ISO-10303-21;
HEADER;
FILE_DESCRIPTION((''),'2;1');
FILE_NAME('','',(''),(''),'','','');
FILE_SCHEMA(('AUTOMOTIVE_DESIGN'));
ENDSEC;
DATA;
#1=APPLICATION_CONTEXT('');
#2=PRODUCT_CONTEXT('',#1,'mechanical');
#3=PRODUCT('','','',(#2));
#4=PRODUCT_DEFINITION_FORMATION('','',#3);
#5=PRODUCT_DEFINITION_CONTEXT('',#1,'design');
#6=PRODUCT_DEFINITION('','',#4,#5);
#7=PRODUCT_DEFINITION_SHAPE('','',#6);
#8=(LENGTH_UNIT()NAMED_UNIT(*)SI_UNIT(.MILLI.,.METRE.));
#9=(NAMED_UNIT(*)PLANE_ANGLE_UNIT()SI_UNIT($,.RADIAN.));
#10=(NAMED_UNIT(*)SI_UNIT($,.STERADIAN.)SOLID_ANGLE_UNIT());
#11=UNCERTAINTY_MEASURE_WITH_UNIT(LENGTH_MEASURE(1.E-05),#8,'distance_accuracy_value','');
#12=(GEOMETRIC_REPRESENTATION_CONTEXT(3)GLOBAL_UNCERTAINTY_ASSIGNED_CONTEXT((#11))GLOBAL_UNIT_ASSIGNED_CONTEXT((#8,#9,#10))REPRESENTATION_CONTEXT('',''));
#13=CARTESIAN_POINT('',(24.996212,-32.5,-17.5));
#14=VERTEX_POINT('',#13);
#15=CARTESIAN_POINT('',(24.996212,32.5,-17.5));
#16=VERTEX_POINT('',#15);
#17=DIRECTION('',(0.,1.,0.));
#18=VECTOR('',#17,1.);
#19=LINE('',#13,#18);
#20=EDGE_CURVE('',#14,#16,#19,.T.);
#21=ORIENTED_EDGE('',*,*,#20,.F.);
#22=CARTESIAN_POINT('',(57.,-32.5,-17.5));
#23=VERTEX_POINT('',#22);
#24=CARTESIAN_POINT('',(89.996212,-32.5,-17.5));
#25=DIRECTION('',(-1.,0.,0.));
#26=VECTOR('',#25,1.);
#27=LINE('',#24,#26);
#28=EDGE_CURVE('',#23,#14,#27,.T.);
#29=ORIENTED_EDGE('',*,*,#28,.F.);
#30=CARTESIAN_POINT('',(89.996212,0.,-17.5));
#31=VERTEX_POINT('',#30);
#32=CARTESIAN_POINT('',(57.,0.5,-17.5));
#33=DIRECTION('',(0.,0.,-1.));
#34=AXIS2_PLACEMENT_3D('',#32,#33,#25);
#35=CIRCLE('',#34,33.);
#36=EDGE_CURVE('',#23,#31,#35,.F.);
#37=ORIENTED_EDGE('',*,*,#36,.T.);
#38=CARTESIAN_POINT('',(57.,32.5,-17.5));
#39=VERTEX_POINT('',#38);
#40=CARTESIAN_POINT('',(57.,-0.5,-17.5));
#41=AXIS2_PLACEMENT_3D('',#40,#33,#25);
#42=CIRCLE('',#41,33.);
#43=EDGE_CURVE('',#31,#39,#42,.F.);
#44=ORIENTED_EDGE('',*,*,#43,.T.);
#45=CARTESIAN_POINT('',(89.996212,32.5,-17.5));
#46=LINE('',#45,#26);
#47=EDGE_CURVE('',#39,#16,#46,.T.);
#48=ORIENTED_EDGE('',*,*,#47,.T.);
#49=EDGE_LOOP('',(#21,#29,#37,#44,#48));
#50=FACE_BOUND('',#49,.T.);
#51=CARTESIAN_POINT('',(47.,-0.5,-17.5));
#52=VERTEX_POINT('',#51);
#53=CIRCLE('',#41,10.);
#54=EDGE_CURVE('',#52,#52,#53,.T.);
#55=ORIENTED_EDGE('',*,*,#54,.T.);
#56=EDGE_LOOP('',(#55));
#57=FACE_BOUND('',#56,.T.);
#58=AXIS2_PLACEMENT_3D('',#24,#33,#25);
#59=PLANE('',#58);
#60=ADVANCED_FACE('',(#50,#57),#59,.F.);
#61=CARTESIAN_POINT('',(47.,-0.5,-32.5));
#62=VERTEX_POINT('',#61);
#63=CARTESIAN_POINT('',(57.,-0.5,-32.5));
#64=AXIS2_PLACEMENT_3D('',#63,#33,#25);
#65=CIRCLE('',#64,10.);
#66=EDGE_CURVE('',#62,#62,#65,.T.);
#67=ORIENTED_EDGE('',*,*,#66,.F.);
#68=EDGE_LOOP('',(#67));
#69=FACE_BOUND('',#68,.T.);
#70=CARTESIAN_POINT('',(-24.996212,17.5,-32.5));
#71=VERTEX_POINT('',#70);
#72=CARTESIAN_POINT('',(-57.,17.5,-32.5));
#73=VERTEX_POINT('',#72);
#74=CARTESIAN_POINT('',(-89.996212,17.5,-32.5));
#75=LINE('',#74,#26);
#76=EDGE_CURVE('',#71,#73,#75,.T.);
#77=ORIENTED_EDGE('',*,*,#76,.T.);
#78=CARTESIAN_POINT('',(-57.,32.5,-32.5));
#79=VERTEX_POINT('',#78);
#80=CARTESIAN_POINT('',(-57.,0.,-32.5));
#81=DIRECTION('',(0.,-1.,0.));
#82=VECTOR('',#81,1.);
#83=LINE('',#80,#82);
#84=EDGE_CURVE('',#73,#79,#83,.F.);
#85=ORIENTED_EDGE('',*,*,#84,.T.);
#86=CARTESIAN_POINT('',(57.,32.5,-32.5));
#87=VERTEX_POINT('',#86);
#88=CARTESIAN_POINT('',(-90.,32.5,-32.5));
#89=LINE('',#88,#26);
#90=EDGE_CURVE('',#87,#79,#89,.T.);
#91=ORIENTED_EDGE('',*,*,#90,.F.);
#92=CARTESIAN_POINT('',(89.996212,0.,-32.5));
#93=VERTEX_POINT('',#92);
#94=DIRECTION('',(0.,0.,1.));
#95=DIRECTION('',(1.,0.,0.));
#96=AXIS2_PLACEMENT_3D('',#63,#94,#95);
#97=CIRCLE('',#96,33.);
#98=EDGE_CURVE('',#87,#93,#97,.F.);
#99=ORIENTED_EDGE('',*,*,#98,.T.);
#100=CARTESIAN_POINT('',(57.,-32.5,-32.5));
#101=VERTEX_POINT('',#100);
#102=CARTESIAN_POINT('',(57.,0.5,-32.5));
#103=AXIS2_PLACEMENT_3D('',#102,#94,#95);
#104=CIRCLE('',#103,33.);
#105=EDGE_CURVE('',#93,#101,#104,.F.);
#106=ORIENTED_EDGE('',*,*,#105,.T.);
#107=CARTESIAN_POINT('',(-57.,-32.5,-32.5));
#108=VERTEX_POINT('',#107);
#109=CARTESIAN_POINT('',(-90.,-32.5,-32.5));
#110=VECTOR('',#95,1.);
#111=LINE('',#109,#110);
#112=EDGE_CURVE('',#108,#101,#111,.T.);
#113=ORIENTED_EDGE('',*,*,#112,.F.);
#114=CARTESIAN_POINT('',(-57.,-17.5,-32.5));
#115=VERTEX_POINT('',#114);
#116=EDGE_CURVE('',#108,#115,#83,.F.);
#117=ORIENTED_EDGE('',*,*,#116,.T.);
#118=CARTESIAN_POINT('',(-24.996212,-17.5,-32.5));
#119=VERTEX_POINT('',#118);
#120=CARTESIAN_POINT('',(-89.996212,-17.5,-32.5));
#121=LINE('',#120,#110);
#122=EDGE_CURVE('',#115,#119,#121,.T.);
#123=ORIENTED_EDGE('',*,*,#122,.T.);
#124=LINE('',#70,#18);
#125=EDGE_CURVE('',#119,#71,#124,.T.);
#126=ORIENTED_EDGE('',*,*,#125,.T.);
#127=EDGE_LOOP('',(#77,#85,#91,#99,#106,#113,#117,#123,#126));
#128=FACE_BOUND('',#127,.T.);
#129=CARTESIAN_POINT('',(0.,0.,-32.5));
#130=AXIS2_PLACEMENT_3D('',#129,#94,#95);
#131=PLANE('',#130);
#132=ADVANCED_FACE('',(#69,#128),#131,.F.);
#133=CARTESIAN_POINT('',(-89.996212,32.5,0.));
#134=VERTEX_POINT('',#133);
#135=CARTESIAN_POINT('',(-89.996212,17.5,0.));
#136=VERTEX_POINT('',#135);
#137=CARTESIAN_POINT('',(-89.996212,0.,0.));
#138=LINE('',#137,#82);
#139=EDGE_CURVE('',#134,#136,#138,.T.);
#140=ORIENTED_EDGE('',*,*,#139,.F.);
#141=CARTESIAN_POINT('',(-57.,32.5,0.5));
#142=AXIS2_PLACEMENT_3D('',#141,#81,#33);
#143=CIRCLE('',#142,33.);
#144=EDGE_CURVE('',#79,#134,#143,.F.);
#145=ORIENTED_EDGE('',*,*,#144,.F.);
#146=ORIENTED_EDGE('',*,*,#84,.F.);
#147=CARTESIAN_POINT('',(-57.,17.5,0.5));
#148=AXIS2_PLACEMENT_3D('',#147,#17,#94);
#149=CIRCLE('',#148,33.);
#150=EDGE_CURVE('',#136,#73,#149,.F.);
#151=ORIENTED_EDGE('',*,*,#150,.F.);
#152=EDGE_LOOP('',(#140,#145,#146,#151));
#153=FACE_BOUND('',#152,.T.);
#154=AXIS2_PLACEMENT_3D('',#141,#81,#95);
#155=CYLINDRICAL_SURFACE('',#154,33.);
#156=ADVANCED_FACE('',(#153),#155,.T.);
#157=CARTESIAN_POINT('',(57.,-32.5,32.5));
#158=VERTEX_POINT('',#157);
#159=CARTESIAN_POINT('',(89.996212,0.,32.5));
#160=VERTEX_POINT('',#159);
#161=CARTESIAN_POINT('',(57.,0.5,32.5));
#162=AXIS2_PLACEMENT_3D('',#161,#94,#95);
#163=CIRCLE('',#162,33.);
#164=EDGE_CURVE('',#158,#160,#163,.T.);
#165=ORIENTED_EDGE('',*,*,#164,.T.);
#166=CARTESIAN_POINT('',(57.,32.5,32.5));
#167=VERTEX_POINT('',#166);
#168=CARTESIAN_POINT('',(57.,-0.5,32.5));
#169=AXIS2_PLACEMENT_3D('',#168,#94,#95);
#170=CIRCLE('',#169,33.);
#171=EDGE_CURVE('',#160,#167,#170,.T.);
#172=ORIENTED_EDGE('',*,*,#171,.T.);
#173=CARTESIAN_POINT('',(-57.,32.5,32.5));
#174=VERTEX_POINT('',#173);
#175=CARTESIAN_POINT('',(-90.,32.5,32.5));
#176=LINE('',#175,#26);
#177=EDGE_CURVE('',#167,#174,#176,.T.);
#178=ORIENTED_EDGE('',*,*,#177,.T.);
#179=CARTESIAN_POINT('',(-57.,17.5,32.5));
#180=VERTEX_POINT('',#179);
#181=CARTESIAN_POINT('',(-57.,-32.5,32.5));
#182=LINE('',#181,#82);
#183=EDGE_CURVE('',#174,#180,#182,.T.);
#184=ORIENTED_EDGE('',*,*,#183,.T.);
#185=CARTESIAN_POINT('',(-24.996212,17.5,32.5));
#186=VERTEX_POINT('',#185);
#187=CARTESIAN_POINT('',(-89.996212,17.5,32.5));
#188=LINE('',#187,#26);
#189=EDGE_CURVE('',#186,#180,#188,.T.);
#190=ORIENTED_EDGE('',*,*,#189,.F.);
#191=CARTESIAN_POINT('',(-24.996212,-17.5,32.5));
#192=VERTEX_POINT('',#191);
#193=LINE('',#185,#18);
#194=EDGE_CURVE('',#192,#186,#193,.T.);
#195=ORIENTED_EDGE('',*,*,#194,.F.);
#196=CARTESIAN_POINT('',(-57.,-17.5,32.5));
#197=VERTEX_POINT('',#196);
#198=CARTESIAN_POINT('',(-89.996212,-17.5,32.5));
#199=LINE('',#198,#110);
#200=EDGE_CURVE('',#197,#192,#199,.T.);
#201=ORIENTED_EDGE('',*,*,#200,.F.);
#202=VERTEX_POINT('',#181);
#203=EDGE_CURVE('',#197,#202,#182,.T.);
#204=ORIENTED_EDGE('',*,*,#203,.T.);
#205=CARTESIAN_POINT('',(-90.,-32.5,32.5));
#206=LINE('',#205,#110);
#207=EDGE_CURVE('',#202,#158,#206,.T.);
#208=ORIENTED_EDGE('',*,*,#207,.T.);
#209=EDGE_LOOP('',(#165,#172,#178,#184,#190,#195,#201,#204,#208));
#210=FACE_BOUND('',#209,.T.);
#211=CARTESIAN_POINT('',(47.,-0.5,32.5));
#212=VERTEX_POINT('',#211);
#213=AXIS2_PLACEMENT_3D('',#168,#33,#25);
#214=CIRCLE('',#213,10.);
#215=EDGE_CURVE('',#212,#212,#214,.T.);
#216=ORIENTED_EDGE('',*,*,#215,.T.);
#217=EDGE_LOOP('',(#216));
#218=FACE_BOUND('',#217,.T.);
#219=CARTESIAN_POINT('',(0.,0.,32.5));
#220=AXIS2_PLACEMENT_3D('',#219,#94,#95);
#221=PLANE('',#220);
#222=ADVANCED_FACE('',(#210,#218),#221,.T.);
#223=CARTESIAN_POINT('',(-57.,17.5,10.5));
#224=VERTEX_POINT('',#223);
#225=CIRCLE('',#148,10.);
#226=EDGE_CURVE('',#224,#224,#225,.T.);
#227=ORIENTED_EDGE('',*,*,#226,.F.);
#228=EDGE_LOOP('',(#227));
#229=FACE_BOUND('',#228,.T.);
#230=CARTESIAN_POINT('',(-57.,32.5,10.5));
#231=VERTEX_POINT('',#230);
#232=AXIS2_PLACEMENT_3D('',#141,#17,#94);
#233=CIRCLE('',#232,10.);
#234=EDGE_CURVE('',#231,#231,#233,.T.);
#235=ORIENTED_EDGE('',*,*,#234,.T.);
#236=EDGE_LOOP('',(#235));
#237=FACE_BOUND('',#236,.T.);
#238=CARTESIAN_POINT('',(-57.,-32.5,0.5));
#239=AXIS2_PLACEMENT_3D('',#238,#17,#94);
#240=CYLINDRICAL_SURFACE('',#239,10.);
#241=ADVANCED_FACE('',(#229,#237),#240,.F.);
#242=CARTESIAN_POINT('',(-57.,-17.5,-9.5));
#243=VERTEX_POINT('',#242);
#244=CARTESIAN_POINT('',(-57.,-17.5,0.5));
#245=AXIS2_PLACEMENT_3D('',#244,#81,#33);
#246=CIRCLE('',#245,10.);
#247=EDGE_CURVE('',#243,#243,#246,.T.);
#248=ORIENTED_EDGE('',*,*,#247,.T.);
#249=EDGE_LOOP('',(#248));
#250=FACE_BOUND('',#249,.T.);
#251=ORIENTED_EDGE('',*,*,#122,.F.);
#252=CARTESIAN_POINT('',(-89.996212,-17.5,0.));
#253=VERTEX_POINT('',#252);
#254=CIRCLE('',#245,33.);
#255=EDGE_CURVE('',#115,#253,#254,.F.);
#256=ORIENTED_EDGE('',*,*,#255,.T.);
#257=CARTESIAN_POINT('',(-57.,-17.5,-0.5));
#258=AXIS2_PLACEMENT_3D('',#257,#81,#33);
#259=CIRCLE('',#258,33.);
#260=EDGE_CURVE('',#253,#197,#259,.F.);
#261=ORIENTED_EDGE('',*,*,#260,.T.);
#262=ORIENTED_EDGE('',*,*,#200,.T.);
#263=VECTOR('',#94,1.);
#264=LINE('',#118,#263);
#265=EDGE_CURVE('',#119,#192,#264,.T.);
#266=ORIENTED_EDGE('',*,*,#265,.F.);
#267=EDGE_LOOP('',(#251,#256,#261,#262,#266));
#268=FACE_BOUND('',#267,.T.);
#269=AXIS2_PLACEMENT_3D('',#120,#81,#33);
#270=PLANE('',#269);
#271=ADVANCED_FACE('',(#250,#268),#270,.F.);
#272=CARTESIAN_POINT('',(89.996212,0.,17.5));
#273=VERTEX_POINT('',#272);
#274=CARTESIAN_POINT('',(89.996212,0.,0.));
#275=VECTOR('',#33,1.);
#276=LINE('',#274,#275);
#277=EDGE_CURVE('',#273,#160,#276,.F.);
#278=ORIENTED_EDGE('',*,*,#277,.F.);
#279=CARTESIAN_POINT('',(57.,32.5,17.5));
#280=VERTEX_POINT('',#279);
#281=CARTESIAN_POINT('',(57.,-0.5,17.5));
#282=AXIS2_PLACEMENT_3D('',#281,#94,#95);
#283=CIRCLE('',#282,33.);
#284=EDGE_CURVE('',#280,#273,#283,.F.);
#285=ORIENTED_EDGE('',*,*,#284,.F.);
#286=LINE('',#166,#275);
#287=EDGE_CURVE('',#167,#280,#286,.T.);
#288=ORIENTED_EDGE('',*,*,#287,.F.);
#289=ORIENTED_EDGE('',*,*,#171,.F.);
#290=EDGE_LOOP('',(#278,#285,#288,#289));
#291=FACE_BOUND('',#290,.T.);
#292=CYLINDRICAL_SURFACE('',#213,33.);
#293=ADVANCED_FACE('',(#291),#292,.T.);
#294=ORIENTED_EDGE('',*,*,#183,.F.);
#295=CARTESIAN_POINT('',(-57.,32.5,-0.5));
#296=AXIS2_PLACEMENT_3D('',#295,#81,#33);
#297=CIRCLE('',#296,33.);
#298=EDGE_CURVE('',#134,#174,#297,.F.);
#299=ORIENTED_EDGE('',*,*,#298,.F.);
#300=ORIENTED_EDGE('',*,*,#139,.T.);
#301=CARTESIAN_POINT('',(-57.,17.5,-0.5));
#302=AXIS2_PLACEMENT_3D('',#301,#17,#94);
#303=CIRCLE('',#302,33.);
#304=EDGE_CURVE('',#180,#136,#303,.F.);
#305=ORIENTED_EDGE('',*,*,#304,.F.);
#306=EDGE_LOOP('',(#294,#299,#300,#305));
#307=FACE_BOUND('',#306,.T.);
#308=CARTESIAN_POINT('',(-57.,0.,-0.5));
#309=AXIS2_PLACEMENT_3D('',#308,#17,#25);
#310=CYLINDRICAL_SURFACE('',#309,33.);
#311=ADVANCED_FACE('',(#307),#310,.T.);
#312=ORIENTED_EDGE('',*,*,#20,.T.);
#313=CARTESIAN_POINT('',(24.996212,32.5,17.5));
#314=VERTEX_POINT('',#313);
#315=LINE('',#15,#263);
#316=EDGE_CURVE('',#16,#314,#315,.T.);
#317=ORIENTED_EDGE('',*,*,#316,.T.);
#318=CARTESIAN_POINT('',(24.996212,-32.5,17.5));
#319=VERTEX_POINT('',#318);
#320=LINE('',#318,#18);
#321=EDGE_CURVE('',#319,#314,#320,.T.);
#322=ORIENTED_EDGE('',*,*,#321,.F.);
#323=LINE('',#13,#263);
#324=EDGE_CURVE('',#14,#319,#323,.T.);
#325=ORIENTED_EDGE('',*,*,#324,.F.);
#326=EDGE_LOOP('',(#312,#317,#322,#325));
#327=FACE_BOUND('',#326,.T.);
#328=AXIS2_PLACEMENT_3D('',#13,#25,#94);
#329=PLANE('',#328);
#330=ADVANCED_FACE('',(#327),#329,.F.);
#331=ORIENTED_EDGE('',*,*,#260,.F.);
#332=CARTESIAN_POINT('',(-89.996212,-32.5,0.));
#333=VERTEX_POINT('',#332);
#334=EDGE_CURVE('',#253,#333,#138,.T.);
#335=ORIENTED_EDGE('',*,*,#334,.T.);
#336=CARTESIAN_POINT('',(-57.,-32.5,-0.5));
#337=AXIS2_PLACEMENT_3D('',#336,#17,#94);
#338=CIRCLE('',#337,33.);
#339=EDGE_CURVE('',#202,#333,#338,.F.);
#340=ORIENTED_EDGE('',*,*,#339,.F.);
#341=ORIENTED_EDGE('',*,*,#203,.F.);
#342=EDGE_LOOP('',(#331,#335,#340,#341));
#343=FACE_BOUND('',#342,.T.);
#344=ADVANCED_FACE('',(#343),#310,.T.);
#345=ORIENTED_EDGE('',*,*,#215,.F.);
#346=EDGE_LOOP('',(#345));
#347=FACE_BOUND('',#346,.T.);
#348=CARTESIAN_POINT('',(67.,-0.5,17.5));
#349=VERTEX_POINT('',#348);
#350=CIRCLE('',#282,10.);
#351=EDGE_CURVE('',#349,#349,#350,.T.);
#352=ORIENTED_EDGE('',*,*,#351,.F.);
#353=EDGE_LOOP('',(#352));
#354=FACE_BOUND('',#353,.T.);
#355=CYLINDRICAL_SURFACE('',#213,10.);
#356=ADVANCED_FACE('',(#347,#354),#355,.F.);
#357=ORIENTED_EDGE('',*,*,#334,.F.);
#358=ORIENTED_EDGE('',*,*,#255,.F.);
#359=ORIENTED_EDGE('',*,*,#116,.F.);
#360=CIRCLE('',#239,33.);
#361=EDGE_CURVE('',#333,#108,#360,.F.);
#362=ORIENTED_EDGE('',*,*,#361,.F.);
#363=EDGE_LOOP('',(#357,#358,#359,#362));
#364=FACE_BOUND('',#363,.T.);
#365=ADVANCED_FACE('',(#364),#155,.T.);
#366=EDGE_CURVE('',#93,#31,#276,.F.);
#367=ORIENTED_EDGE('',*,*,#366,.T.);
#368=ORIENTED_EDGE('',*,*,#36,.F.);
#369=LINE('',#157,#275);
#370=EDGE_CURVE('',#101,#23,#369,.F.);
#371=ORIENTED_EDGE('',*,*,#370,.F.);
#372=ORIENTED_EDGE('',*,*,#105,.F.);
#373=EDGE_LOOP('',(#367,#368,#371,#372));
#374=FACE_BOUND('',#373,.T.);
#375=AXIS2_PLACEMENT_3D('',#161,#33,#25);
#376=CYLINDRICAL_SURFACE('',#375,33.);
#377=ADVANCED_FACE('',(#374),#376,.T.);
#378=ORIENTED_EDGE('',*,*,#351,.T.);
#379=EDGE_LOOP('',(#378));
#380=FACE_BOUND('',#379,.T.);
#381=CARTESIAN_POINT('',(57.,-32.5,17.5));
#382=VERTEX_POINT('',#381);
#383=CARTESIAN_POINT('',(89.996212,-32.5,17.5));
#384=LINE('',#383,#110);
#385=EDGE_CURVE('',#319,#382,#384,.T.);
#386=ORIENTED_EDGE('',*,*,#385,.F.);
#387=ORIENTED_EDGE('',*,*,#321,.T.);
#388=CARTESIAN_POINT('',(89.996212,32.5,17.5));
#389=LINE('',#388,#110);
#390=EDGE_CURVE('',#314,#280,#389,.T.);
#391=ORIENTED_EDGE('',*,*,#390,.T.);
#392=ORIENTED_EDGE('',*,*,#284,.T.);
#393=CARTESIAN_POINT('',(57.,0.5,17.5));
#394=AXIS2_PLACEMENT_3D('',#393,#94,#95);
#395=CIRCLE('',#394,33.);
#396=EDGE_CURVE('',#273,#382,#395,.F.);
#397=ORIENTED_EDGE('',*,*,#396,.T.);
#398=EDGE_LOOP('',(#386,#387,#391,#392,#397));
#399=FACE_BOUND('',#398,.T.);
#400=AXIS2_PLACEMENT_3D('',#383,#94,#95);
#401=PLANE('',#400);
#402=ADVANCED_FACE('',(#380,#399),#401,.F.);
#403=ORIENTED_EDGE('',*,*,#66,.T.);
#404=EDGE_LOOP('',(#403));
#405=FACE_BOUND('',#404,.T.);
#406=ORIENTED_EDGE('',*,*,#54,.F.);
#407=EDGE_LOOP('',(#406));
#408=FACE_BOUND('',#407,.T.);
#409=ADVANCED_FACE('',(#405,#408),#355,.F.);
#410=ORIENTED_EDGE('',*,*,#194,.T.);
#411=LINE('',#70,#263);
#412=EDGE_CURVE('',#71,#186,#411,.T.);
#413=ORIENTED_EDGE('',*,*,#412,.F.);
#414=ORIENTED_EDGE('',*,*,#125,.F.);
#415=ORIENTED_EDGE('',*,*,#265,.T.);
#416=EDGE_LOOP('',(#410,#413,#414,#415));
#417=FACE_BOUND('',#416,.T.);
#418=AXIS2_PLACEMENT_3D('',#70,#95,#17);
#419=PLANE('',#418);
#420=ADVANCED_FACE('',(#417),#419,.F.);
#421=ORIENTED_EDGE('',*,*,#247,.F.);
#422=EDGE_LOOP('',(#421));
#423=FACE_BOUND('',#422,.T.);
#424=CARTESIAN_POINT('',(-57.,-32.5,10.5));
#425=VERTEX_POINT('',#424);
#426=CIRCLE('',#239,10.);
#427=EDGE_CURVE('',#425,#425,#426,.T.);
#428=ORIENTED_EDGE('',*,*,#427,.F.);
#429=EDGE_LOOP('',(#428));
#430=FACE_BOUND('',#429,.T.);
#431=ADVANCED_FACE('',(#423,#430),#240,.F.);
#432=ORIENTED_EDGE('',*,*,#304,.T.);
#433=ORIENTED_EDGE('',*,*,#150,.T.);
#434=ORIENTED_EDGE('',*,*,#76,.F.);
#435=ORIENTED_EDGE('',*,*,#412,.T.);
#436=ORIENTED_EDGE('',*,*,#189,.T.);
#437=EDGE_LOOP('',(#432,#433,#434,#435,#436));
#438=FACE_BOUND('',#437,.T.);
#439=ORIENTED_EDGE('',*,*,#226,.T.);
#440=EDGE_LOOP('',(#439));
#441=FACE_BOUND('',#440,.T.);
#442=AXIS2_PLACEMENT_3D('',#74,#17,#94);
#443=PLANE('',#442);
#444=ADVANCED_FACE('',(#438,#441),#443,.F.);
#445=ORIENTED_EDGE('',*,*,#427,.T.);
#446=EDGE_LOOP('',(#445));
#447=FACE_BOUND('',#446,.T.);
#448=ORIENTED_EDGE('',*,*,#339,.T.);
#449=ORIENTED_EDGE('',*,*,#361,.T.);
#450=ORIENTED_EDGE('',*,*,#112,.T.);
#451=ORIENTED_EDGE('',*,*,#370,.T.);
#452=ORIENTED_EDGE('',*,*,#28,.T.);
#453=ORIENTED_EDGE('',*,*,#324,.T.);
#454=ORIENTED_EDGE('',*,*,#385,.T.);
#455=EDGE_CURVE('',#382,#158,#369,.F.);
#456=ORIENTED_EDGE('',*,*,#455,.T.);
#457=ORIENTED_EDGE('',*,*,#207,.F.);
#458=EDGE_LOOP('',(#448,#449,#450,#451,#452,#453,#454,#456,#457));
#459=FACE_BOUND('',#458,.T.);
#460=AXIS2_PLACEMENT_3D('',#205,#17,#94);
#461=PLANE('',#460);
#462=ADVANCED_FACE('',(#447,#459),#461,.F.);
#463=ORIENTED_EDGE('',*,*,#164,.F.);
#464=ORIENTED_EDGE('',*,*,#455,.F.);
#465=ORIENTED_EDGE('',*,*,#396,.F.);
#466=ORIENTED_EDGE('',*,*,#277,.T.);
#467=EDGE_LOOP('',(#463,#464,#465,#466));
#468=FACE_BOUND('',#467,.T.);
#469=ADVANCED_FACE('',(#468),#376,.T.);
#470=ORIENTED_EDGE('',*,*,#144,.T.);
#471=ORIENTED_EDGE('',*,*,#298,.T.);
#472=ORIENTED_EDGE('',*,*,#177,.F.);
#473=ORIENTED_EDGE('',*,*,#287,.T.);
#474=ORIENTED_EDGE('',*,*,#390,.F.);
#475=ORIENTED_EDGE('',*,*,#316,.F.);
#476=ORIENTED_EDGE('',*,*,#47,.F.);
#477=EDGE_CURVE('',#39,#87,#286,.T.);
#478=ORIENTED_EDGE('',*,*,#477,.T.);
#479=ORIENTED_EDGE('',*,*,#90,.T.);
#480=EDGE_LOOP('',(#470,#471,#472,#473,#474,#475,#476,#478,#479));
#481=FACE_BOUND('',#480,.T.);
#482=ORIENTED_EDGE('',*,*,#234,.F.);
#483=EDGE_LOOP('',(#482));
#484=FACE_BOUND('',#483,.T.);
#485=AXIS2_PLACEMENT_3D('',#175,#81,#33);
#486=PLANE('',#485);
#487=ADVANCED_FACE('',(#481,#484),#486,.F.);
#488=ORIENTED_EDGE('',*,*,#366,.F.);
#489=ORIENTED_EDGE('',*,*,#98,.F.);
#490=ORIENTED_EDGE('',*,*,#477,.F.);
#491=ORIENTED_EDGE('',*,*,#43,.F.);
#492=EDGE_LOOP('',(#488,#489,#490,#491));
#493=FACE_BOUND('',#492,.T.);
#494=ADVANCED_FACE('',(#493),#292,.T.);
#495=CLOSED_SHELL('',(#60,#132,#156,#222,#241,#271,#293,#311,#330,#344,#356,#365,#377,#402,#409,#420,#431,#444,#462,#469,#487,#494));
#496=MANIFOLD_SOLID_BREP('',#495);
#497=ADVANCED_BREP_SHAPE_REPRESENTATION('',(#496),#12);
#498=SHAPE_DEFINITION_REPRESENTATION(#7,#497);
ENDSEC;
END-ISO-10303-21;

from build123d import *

# Parameters (mm, degrees)
ESBO_O1_W                  = 180
ESBO_O1_H                  = 65
RESSALTO_EXTRUS_O2_DEPTH   = 32.5
FILETE1_R                  = 33
CORTE_EXTRUS_O1_DEPTH      = 102.056914657
CORTE_EXTRUS_O1_DEPTH_BACK = 102.056914657
ESBO_O2_W                  = 65
ESBO_O2_H                  = 35
FILETE4_R                  = 33
ESBO_O4_W                  = 65
ESBO_O4_H                  = 35
CORTE_EXTRUS_O2_DEPTH      = 116.674405799
ESBO_O5_R                  = 10
CORTE_EXTRUS_O3_DEPTH      = 116.674405799
ESBO_O6_R                  = 10
CORTE_EXTRUS_O4_DEPTH      = 116.674405799


with BuildPart() as part:
    # Esboço1 → Ressalto-extrusão2 (new, symmetric)
    with BuildSketch(Plane.XY):
        Rectangle(ESBO_O1_W, ESBO_O1_H)
    extrude(amount=RESSALTO_EXTRUS_O2_DEPTH, both=True)

    # Filete1
    # the kernel refuses this fillet: 33 mm, written as the material it takes off along each edge
    with BuildSketch(Plane(origin=(-90, -115, 32.5), x_dir=(1, 0, 0), z_dir=(0, 1, 0))) as filete1_piece_1:
        with BuildLine():
            CenterArc((FILETE1_R, FILETE1_R), FILETE1_R, 180, 90)
            Line((0, FILETE1_R), (0, 0))
            Line((0, 0), (FILETE1_R, 0))
        make_face()
    extrude(amount=230, mode=Mode.SUBTRACT)
    with BuildSketch(Plane(origin=(-90, -115, -32.5), x_dir=(1, 0, 0), z_dir=(0, 1, 0))) as filete1_piece_2:
        with BuildLine():
            CenterArc((FILETE1_R, -FILETE1_R), FILETE1_R, 90, 90)
            Line((0, -FILETE1_R), (0, 0))
            Line((0, 0), (FILETE1_R, 0))
        make_face()
    extrude(amount=230, mode=Mode.SUBTRACT)

    # Esboço2 → Corte-extrusão1 (cut, two sides: drawn at the far end of the back side and taken through both)
    with BuildSketch(Plane.XY.offset(-CORTE_EXTRUS_O1_DEPTH_BACK)):
        with Locations((-57.496211904, 0)):
            Rectangle(ESBO_O2_W, ESBO_O2_H)
    extrude(amount=CORTE_EXTRUS_O1_DEPTH + CORTE_EXTRUS_O1_DEPTH_BACK, mode=Mode.SUBTRACT)

    # Filete4
    # the kernel refuses this fillet: 33 mm, written as the material it takes off along each edge
    with BuildSketch(Plane(origin=(90, -32.5, 115), x_dir=(0, 1, 0), z_dir=(0, 0, -1)), Plane(origin=(90, 32.5, 115), x_dir=(-1, 0, 0), z_dir=(0, 0, -1))) as filete4_piece_1:
        with BuildLine():
            CenterArc((FILETE4_R, -FILETE4_R), FILETE4_R, 90, 90)
            Line((0, -FILETE4_R), (0, 0))
            Line((0, 0), (FILETE4_R, 0))
        make_face()
    extrude(amount=230, mode=Mode.SUBTRACT)

    # Esboço4 → Corte-extrusão2 (cut, through all)
    with BuildSketch(Plane(origin=(0, 32.5, 0), x_dir=(1, 0, 0), z_dir=(0, 1, 0))):
        with Locations((57.496211904, 0)):
            Rectangle(ESBO_O4_W, ESBO_O4_H)
    extrude(amount=-CORTE_EXTRUS_O2_DEPTH, mode=Mode.SUBTRACT)

    # Esboço5 → Corte-extrusão3 (cut, through all)
    with BuildSketch(Plane(origin=(0, 0, -32.5), x_dir=(-1, 0, 0), z_dir=(0, 0, -1))):
        with Locations((-57, -0.5)):
            Circle(ESBO_O5_R)
    extrude(amount=-CORTE_EXTRUS_O3_DEPTH, mode=Mode.SUBTRACT)

    # Esboço6 → Corte-extrusão4 (cut, through all)
    with BuildSketch(Plane(origin=(0, 32.5, 0), x_dir=(1, 0, 0), z_dir=(0, 1, 0))):
        with Locations(Location((-57, -0.5, 0), (0, 0, 270))):
            Circle(ESBO_O6_R)
    extrude(amount=-CORTE_EXTRUS_O4_DEPTH, mode=Mode.SUBTRACT)


solid = part.part
